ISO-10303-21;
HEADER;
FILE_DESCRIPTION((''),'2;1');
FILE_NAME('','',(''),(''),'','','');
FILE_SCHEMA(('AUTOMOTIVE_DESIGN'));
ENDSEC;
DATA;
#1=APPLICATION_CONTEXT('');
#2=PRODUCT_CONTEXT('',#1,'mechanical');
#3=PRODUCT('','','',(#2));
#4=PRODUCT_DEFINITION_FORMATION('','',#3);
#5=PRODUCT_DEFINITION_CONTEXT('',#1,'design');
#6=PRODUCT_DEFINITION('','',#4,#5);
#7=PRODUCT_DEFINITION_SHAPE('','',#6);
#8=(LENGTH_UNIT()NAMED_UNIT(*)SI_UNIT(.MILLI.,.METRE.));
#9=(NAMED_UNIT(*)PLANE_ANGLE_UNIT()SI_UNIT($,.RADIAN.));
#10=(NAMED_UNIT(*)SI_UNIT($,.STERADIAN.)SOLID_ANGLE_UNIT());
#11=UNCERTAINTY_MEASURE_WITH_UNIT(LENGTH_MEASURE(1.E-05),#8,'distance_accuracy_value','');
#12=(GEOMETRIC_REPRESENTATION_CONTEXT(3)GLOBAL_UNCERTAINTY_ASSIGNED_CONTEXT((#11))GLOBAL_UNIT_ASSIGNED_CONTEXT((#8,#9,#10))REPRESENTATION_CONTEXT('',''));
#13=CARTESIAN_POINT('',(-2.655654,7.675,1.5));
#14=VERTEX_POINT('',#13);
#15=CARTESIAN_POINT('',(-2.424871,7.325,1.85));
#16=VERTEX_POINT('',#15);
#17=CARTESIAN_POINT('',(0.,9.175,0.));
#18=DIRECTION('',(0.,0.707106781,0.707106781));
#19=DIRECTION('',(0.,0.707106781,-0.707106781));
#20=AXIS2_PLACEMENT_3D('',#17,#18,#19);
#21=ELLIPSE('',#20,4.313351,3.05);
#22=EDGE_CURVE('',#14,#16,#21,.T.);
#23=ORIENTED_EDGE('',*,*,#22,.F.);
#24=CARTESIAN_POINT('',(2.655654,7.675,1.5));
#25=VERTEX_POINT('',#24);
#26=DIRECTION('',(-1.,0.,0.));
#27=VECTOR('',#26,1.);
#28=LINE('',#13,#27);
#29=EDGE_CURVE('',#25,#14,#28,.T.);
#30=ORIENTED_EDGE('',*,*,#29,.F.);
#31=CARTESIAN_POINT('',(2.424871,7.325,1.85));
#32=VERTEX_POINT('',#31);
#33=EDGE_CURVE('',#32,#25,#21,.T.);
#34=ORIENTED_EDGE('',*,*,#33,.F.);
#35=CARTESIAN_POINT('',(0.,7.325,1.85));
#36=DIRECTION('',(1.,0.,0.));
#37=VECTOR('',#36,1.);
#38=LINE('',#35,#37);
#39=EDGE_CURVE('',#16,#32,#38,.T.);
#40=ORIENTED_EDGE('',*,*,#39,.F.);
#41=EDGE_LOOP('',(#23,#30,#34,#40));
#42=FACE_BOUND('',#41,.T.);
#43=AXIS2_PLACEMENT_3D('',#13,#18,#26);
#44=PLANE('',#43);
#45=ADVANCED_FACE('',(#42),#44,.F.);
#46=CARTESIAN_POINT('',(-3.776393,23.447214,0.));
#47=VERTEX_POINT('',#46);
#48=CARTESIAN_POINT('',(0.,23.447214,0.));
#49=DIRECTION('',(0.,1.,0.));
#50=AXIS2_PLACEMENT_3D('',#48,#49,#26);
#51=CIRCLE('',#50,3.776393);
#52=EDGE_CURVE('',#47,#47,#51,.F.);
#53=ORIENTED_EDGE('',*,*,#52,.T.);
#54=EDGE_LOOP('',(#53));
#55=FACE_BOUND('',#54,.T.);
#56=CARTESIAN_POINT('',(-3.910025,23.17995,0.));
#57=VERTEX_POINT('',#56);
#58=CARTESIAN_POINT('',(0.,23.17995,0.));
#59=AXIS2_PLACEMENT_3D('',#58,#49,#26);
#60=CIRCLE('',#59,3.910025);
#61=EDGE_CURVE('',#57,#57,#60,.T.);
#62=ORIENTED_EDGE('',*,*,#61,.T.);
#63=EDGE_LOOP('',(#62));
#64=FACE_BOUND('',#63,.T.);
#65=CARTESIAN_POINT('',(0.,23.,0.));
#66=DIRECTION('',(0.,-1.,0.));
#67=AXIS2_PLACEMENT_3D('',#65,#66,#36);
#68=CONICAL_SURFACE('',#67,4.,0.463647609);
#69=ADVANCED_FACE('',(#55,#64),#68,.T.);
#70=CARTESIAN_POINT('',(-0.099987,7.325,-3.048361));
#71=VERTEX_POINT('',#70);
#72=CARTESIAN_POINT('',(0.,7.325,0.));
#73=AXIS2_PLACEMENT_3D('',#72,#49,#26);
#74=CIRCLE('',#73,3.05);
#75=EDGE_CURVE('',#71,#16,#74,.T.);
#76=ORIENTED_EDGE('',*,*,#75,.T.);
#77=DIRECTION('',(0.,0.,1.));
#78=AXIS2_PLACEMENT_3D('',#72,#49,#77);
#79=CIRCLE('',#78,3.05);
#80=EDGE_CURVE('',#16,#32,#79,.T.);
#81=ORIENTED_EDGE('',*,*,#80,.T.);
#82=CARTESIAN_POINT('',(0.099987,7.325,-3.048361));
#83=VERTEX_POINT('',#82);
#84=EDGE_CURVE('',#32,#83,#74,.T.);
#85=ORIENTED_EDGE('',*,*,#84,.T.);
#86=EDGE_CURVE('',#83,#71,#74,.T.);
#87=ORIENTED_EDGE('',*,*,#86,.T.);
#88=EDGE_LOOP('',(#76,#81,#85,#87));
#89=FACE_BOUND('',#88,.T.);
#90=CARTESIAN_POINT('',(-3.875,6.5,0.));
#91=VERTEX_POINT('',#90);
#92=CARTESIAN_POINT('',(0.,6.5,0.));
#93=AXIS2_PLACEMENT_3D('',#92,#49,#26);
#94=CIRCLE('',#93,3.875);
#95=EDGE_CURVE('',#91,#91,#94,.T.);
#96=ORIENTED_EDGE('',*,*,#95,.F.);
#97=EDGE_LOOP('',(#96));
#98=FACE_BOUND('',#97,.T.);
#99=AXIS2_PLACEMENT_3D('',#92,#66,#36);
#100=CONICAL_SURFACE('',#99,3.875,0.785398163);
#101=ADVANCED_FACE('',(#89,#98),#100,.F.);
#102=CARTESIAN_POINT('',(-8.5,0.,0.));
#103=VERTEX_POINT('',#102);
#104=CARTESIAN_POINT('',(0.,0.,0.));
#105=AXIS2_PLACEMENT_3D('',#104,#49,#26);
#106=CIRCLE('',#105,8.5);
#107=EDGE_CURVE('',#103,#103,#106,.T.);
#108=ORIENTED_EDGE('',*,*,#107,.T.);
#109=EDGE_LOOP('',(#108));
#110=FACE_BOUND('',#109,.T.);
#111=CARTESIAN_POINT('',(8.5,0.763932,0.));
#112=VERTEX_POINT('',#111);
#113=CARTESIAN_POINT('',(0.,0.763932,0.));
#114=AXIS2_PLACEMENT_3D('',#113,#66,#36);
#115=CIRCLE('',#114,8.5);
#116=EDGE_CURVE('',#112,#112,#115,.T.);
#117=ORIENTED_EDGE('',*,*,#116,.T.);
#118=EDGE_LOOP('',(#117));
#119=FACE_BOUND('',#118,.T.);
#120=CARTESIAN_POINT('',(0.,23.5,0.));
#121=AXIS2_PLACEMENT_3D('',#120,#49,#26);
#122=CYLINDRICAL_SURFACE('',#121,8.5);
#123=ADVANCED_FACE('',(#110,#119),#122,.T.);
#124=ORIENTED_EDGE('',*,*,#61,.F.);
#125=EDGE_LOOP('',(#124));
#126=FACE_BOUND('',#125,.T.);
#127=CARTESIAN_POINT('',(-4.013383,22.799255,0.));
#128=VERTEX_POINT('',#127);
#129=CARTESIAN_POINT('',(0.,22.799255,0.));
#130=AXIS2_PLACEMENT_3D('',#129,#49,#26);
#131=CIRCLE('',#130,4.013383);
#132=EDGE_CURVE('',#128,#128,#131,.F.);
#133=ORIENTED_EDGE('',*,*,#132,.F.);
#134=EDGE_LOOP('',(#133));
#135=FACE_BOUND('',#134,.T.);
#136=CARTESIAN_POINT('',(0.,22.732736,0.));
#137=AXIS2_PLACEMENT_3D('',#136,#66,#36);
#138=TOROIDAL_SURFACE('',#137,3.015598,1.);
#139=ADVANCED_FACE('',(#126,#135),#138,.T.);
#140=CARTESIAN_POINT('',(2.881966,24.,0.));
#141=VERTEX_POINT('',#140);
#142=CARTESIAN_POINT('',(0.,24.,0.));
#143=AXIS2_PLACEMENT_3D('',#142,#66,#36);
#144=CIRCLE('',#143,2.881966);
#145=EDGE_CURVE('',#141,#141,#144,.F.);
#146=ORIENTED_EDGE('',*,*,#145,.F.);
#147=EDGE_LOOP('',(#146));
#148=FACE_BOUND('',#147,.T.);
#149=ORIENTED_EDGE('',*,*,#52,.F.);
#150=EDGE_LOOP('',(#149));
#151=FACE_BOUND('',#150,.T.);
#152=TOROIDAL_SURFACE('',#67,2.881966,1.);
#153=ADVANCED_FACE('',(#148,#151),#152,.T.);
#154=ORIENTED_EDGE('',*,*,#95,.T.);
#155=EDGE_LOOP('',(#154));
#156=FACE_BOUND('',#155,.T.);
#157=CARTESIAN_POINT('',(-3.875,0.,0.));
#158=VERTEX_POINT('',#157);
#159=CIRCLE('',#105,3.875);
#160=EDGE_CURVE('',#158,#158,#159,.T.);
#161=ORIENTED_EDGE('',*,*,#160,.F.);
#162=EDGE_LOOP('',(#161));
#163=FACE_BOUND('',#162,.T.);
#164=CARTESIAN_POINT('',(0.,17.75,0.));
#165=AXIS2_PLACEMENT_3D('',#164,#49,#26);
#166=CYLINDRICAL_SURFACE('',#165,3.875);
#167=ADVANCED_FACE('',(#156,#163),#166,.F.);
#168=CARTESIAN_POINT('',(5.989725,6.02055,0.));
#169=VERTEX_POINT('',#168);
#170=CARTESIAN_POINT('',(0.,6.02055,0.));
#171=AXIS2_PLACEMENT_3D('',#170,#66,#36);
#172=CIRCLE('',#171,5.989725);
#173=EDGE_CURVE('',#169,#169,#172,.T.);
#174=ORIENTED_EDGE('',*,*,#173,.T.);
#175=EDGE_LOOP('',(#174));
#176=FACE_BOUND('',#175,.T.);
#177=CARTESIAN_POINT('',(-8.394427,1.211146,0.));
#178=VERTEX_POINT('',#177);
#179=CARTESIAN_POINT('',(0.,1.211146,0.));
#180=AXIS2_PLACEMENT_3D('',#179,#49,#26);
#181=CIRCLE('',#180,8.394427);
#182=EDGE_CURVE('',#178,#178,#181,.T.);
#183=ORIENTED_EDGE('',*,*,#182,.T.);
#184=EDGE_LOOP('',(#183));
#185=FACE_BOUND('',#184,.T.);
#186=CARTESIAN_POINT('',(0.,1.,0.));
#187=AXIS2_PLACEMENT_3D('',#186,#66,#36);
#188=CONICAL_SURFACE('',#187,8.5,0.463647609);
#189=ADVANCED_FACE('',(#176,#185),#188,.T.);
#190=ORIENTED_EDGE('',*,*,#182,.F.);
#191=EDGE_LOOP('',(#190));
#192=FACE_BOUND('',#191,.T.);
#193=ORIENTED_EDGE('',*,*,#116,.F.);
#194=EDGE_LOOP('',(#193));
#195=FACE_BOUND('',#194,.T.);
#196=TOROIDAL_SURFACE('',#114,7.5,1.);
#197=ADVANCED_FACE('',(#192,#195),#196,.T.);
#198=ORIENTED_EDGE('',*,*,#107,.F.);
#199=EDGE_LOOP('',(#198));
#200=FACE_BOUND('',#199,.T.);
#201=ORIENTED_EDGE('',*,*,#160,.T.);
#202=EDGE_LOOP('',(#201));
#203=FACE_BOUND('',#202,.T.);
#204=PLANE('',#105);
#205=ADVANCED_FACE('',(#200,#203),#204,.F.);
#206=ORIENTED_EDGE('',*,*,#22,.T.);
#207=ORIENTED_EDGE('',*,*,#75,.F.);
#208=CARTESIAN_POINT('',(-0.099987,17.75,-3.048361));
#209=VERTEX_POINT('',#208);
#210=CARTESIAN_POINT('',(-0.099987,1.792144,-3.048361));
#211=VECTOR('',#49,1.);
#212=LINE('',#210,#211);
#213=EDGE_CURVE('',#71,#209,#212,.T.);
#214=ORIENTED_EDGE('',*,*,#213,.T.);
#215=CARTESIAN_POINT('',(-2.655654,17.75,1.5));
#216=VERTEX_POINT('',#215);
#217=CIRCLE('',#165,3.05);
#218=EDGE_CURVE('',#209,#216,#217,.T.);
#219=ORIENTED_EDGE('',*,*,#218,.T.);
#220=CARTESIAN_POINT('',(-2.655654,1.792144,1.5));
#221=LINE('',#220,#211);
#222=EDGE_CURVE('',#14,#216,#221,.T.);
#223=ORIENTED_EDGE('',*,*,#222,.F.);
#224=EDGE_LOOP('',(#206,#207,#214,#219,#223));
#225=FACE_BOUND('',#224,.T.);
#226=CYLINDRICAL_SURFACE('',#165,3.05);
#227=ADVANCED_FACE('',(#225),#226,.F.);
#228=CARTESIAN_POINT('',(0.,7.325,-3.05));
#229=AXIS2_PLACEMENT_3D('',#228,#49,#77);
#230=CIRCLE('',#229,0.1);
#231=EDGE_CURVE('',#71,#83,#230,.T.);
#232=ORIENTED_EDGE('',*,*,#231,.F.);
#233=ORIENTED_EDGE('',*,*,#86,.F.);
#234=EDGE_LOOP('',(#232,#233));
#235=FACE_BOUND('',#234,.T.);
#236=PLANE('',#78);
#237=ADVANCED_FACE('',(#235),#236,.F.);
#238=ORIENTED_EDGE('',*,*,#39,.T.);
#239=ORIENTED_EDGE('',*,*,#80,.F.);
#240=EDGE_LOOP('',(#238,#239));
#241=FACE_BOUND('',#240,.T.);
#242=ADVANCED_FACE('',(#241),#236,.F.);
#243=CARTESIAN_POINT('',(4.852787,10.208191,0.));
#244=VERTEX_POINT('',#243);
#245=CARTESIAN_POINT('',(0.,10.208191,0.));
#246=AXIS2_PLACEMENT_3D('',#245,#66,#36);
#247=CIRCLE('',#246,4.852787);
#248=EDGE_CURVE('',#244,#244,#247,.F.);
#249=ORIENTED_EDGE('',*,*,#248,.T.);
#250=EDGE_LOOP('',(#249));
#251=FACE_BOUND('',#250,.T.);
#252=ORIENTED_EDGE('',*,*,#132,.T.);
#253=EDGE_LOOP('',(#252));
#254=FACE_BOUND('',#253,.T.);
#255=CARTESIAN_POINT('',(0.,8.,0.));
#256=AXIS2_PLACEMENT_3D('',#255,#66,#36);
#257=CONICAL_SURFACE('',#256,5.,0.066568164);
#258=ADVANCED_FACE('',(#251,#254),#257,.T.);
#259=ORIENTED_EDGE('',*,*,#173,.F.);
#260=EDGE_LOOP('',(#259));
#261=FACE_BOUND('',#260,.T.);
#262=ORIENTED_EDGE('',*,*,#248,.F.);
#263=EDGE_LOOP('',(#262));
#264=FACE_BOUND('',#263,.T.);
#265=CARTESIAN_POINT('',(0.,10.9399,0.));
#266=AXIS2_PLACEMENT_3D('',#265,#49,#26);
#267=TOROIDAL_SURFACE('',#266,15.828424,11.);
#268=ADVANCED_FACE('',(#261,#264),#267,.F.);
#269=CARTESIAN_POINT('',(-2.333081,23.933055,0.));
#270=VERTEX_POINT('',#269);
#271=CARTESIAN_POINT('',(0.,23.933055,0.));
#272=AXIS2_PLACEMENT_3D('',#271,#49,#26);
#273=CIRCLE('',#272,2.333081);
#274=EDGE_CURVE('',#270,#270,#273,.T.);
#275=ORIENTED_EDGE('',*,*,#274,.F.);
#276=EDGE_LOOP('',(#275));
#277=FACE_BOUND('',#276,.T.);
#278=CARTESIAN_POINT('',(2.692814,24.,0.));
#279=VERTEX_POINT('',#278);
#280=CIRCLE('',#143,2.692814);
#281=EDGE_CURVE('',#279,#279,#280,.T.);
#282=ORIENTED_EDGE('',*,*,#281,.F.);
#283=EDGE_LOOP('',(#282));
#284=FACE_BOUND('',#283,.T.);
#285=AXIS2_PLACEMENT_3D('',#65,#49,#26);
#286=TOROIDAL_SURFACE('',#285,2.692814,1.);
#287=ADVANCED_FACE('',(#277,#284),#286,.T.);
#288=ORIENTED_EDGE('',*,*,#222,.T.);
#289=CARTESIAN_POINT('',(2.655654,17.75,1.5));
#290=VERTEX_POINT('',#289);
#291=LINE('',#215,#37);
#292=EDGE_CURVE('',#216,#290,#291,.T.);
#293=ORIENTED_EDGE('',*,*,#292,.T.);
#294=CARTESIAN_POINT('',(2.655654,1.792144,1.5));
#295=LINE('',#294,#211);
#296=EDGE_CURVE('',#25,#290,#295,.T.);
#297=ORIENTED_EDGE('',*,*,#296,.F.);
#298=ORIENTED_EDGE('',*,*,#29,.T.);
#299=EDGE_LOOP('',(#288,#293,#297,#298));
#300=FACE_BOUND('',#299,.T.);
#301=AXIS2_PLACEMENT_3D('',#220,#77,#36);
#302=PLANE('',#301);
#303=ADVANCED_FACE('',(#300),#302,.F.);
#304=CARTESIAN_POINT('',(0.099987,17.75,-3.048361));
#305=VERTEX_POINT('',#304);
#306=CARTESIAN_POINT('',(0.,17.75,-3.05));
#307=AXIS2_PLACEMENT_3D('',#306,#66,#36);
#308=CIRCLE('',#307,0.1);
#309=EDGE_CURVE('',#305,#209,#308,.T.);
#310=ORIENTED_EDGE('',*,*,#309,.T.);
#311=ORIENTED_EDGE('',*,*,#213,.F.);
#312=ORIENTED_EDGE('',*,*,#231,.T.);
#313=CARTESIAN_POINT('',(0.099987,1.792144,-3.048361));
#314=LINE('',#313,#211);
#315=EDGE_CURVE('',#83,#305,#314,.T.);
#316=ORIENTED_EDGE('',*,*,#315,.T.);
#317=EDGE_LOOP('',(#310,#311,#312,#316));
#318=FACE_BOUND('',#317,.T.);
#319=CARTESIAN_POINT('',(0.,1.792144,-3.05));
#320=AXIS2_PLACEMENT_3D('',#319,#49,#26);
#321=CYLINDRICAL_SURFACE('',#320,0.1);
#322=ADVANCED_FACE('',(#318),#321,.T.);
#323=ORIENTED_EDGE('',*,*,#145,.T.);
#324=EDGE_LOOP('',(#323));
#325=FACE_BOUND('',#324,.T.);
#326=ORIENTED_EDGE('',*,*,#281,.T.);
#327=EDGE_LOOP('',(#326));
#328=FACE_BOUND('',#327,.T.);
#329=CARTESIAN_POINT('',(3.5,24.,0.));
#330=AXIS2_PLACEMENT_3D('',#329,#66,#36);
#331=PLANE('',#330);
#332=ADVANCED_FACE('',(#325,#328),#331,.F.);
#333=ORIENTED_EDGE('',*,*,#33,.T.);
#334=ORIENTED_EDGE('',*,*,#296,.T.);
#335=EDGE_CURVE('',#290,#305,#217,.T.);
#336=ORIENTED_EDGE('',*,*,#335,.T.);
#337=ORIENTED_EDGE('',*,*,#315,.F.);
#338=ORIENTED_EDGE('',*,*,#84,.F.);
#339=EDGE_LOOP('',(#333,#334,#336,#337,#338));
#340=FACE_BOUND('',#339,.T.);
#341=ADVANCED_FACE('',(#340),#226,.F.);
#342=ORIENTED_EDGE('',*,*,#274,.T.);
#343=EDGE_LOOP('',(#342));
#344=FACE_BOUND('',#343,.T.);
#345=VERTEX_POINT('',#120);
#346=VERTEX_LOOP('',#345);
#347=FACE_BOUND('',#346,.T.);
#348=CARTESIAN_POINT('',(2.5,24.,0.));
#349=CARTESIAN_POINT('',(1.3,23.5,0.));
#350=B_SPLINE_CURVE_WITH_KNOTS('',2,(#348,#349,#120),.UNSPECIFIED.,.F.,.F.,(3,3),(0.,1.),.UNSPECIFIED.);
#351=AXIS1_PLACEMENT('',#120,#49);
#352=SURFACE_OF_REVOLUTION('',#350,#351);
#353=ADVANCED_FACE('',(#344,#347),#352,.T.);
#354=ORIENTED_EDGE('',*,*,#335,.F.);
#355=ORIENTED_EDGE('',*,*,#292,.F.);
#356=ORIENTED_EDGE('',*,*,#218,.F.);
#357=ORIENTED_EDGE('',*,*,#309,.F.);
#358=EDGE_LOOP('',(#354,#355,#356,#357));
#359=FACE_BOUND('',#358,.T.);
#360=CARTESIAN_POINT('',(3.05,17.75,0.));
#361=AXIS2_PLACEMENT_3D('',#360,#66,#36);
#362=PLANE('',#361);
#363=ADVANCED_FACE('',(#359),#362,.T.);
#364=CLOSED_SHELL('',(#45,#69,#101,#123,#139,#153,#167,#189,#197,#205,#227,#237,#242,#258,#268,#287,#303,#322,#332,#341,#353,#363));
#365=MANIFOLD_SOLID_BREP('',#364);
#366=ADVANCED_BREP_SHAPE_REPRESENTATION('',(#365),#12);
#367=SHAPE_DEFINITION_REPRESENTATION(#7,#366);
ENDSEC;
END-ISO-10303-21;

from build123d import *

# Parameters (mm, degrees)
FILLET1_R           = 11
FILLET2_R           = 1
BOSS_EXTRUDE1_DEPTH = 10.425
CHAMFER1_SIZE       = 0.35


with BuildPart() as part:
    # Sketch1 → Revolve1 (revolve)
    with BuildSketch(Plane.XY, mode=Mode.PRIVATE) as revolve1_sk:
        with BuildLine():
            Line((0, 0), (8.5, 0))
            Line((8.5, 0), (8.5, 1))
            Line((8.5, 1), (5, 8))
            Line((5, 8), (4, 23))
            Line((4, 23), (3.5, 24))
            Line((3.5, 24), (2.5, 24))
            add(Edge.make_bspline(
                [(2.5, 24), (1.3, 23.5), (0, 23.5)],
                knots=[0, 0, 0, 1, 1, 1], degree=2))
            Line((0, 23.5), (0, 0))
        make_face()
    revolve(revolve1_sk.sketch.rotate(Axis((0, 23.5, 0), (0, -1, 0)), 180), axis=Axis((0, 23.5, 0), (0, -1, 0)))

    # Fillet1
    fillet1_edges = [part.edges().sort_by_distance(p)[0] for p in [
        (5, 8, 0),
    ]]
    fillet(fillet1_edges, radius=FILLET1_R)

    # Fillet2
    fillet2_edges = [part.edges().sort_by_distance(p)[0] for p in [
        (2.5, 24, 0),
        (3.5, 24, 0),
        (4, 23, 0),
        (8.5, 1, 0),
    ]]
    fillet(fillet2_edges, radius=FILLET2_R)

    # Sketch3 → Cut-Revolve1 (revolve, cut)
    with BuildSketch(Plane.XY):
        Polygon((0, 0), (3.875, 0), (3.875, 6.5), (3.05, 7.325), (3.05, 17.75), (0, 17.75), align=None)
    revolve(axis=Axis((0, 17.75, 0), (0, -1, 0)), mode=Mode.SUBTRACT)

    # Sketch4 → Boss-Extrude1 (add)
    with BuildSketch(Plane.XZ.offset(-17.75)):
        with BuildLine():
            Line((-2.655654345, 1.5), (2.655654345, 1.5))
            ThreePointArc((2.655654345, 1.5), (0, 3.05), (-2.655654345, 1.5))
        make_face()
        with BuildLine():
            ThreePointArc((-0.099986562, -3.048360656), (0, -3.05), (0.099986562, -3.048360656))
            ThreePointArc((0.099986562, -3.048360656), (0, -2.95), (-0.099986562, -3.048360656))
        make_face()
    extrude(amount=BOSS_EXTRUDE1_DEPTH)

    # Chamfer1
    # the kernel refuses this chamfer: 0.35 mm, written as the material it takes off along each edge
    with BuildSketch(Plane(origin=(-3.555743391, 7.325, 1.5), x_dir=(0, 0.9996219169112968, -0.027495876610586154), z_dir=(1, 0, 0))) as chamfer1_piece_1_section:
        Polygon((CHAMFER1_SIZE * 0.999621916911, CHAMFER1_SIZE * 0.0274958766106), (-CHAMFER1_SIZE * 0.0274958766106, CHAMFER1_SIZE * 0.999621916911), (0, 0), align=None)
    chamfer1_piece_1 = extrude(amount=7.111486782, mode=Mode.PRIVATE)
    chamfer1_piece_1 = chamfer1_piece_1 & Plane(origin=(0, 7.499624527, 0), x_dir=(1, 0, 0), z_dir=(0, 1, 0)) * Cylinder(3.05, 16, mode=Mode.PRIVATE)
    add(chamfer1_piece_1, mode=Mode.SUBTRACT)


solid = part.part
